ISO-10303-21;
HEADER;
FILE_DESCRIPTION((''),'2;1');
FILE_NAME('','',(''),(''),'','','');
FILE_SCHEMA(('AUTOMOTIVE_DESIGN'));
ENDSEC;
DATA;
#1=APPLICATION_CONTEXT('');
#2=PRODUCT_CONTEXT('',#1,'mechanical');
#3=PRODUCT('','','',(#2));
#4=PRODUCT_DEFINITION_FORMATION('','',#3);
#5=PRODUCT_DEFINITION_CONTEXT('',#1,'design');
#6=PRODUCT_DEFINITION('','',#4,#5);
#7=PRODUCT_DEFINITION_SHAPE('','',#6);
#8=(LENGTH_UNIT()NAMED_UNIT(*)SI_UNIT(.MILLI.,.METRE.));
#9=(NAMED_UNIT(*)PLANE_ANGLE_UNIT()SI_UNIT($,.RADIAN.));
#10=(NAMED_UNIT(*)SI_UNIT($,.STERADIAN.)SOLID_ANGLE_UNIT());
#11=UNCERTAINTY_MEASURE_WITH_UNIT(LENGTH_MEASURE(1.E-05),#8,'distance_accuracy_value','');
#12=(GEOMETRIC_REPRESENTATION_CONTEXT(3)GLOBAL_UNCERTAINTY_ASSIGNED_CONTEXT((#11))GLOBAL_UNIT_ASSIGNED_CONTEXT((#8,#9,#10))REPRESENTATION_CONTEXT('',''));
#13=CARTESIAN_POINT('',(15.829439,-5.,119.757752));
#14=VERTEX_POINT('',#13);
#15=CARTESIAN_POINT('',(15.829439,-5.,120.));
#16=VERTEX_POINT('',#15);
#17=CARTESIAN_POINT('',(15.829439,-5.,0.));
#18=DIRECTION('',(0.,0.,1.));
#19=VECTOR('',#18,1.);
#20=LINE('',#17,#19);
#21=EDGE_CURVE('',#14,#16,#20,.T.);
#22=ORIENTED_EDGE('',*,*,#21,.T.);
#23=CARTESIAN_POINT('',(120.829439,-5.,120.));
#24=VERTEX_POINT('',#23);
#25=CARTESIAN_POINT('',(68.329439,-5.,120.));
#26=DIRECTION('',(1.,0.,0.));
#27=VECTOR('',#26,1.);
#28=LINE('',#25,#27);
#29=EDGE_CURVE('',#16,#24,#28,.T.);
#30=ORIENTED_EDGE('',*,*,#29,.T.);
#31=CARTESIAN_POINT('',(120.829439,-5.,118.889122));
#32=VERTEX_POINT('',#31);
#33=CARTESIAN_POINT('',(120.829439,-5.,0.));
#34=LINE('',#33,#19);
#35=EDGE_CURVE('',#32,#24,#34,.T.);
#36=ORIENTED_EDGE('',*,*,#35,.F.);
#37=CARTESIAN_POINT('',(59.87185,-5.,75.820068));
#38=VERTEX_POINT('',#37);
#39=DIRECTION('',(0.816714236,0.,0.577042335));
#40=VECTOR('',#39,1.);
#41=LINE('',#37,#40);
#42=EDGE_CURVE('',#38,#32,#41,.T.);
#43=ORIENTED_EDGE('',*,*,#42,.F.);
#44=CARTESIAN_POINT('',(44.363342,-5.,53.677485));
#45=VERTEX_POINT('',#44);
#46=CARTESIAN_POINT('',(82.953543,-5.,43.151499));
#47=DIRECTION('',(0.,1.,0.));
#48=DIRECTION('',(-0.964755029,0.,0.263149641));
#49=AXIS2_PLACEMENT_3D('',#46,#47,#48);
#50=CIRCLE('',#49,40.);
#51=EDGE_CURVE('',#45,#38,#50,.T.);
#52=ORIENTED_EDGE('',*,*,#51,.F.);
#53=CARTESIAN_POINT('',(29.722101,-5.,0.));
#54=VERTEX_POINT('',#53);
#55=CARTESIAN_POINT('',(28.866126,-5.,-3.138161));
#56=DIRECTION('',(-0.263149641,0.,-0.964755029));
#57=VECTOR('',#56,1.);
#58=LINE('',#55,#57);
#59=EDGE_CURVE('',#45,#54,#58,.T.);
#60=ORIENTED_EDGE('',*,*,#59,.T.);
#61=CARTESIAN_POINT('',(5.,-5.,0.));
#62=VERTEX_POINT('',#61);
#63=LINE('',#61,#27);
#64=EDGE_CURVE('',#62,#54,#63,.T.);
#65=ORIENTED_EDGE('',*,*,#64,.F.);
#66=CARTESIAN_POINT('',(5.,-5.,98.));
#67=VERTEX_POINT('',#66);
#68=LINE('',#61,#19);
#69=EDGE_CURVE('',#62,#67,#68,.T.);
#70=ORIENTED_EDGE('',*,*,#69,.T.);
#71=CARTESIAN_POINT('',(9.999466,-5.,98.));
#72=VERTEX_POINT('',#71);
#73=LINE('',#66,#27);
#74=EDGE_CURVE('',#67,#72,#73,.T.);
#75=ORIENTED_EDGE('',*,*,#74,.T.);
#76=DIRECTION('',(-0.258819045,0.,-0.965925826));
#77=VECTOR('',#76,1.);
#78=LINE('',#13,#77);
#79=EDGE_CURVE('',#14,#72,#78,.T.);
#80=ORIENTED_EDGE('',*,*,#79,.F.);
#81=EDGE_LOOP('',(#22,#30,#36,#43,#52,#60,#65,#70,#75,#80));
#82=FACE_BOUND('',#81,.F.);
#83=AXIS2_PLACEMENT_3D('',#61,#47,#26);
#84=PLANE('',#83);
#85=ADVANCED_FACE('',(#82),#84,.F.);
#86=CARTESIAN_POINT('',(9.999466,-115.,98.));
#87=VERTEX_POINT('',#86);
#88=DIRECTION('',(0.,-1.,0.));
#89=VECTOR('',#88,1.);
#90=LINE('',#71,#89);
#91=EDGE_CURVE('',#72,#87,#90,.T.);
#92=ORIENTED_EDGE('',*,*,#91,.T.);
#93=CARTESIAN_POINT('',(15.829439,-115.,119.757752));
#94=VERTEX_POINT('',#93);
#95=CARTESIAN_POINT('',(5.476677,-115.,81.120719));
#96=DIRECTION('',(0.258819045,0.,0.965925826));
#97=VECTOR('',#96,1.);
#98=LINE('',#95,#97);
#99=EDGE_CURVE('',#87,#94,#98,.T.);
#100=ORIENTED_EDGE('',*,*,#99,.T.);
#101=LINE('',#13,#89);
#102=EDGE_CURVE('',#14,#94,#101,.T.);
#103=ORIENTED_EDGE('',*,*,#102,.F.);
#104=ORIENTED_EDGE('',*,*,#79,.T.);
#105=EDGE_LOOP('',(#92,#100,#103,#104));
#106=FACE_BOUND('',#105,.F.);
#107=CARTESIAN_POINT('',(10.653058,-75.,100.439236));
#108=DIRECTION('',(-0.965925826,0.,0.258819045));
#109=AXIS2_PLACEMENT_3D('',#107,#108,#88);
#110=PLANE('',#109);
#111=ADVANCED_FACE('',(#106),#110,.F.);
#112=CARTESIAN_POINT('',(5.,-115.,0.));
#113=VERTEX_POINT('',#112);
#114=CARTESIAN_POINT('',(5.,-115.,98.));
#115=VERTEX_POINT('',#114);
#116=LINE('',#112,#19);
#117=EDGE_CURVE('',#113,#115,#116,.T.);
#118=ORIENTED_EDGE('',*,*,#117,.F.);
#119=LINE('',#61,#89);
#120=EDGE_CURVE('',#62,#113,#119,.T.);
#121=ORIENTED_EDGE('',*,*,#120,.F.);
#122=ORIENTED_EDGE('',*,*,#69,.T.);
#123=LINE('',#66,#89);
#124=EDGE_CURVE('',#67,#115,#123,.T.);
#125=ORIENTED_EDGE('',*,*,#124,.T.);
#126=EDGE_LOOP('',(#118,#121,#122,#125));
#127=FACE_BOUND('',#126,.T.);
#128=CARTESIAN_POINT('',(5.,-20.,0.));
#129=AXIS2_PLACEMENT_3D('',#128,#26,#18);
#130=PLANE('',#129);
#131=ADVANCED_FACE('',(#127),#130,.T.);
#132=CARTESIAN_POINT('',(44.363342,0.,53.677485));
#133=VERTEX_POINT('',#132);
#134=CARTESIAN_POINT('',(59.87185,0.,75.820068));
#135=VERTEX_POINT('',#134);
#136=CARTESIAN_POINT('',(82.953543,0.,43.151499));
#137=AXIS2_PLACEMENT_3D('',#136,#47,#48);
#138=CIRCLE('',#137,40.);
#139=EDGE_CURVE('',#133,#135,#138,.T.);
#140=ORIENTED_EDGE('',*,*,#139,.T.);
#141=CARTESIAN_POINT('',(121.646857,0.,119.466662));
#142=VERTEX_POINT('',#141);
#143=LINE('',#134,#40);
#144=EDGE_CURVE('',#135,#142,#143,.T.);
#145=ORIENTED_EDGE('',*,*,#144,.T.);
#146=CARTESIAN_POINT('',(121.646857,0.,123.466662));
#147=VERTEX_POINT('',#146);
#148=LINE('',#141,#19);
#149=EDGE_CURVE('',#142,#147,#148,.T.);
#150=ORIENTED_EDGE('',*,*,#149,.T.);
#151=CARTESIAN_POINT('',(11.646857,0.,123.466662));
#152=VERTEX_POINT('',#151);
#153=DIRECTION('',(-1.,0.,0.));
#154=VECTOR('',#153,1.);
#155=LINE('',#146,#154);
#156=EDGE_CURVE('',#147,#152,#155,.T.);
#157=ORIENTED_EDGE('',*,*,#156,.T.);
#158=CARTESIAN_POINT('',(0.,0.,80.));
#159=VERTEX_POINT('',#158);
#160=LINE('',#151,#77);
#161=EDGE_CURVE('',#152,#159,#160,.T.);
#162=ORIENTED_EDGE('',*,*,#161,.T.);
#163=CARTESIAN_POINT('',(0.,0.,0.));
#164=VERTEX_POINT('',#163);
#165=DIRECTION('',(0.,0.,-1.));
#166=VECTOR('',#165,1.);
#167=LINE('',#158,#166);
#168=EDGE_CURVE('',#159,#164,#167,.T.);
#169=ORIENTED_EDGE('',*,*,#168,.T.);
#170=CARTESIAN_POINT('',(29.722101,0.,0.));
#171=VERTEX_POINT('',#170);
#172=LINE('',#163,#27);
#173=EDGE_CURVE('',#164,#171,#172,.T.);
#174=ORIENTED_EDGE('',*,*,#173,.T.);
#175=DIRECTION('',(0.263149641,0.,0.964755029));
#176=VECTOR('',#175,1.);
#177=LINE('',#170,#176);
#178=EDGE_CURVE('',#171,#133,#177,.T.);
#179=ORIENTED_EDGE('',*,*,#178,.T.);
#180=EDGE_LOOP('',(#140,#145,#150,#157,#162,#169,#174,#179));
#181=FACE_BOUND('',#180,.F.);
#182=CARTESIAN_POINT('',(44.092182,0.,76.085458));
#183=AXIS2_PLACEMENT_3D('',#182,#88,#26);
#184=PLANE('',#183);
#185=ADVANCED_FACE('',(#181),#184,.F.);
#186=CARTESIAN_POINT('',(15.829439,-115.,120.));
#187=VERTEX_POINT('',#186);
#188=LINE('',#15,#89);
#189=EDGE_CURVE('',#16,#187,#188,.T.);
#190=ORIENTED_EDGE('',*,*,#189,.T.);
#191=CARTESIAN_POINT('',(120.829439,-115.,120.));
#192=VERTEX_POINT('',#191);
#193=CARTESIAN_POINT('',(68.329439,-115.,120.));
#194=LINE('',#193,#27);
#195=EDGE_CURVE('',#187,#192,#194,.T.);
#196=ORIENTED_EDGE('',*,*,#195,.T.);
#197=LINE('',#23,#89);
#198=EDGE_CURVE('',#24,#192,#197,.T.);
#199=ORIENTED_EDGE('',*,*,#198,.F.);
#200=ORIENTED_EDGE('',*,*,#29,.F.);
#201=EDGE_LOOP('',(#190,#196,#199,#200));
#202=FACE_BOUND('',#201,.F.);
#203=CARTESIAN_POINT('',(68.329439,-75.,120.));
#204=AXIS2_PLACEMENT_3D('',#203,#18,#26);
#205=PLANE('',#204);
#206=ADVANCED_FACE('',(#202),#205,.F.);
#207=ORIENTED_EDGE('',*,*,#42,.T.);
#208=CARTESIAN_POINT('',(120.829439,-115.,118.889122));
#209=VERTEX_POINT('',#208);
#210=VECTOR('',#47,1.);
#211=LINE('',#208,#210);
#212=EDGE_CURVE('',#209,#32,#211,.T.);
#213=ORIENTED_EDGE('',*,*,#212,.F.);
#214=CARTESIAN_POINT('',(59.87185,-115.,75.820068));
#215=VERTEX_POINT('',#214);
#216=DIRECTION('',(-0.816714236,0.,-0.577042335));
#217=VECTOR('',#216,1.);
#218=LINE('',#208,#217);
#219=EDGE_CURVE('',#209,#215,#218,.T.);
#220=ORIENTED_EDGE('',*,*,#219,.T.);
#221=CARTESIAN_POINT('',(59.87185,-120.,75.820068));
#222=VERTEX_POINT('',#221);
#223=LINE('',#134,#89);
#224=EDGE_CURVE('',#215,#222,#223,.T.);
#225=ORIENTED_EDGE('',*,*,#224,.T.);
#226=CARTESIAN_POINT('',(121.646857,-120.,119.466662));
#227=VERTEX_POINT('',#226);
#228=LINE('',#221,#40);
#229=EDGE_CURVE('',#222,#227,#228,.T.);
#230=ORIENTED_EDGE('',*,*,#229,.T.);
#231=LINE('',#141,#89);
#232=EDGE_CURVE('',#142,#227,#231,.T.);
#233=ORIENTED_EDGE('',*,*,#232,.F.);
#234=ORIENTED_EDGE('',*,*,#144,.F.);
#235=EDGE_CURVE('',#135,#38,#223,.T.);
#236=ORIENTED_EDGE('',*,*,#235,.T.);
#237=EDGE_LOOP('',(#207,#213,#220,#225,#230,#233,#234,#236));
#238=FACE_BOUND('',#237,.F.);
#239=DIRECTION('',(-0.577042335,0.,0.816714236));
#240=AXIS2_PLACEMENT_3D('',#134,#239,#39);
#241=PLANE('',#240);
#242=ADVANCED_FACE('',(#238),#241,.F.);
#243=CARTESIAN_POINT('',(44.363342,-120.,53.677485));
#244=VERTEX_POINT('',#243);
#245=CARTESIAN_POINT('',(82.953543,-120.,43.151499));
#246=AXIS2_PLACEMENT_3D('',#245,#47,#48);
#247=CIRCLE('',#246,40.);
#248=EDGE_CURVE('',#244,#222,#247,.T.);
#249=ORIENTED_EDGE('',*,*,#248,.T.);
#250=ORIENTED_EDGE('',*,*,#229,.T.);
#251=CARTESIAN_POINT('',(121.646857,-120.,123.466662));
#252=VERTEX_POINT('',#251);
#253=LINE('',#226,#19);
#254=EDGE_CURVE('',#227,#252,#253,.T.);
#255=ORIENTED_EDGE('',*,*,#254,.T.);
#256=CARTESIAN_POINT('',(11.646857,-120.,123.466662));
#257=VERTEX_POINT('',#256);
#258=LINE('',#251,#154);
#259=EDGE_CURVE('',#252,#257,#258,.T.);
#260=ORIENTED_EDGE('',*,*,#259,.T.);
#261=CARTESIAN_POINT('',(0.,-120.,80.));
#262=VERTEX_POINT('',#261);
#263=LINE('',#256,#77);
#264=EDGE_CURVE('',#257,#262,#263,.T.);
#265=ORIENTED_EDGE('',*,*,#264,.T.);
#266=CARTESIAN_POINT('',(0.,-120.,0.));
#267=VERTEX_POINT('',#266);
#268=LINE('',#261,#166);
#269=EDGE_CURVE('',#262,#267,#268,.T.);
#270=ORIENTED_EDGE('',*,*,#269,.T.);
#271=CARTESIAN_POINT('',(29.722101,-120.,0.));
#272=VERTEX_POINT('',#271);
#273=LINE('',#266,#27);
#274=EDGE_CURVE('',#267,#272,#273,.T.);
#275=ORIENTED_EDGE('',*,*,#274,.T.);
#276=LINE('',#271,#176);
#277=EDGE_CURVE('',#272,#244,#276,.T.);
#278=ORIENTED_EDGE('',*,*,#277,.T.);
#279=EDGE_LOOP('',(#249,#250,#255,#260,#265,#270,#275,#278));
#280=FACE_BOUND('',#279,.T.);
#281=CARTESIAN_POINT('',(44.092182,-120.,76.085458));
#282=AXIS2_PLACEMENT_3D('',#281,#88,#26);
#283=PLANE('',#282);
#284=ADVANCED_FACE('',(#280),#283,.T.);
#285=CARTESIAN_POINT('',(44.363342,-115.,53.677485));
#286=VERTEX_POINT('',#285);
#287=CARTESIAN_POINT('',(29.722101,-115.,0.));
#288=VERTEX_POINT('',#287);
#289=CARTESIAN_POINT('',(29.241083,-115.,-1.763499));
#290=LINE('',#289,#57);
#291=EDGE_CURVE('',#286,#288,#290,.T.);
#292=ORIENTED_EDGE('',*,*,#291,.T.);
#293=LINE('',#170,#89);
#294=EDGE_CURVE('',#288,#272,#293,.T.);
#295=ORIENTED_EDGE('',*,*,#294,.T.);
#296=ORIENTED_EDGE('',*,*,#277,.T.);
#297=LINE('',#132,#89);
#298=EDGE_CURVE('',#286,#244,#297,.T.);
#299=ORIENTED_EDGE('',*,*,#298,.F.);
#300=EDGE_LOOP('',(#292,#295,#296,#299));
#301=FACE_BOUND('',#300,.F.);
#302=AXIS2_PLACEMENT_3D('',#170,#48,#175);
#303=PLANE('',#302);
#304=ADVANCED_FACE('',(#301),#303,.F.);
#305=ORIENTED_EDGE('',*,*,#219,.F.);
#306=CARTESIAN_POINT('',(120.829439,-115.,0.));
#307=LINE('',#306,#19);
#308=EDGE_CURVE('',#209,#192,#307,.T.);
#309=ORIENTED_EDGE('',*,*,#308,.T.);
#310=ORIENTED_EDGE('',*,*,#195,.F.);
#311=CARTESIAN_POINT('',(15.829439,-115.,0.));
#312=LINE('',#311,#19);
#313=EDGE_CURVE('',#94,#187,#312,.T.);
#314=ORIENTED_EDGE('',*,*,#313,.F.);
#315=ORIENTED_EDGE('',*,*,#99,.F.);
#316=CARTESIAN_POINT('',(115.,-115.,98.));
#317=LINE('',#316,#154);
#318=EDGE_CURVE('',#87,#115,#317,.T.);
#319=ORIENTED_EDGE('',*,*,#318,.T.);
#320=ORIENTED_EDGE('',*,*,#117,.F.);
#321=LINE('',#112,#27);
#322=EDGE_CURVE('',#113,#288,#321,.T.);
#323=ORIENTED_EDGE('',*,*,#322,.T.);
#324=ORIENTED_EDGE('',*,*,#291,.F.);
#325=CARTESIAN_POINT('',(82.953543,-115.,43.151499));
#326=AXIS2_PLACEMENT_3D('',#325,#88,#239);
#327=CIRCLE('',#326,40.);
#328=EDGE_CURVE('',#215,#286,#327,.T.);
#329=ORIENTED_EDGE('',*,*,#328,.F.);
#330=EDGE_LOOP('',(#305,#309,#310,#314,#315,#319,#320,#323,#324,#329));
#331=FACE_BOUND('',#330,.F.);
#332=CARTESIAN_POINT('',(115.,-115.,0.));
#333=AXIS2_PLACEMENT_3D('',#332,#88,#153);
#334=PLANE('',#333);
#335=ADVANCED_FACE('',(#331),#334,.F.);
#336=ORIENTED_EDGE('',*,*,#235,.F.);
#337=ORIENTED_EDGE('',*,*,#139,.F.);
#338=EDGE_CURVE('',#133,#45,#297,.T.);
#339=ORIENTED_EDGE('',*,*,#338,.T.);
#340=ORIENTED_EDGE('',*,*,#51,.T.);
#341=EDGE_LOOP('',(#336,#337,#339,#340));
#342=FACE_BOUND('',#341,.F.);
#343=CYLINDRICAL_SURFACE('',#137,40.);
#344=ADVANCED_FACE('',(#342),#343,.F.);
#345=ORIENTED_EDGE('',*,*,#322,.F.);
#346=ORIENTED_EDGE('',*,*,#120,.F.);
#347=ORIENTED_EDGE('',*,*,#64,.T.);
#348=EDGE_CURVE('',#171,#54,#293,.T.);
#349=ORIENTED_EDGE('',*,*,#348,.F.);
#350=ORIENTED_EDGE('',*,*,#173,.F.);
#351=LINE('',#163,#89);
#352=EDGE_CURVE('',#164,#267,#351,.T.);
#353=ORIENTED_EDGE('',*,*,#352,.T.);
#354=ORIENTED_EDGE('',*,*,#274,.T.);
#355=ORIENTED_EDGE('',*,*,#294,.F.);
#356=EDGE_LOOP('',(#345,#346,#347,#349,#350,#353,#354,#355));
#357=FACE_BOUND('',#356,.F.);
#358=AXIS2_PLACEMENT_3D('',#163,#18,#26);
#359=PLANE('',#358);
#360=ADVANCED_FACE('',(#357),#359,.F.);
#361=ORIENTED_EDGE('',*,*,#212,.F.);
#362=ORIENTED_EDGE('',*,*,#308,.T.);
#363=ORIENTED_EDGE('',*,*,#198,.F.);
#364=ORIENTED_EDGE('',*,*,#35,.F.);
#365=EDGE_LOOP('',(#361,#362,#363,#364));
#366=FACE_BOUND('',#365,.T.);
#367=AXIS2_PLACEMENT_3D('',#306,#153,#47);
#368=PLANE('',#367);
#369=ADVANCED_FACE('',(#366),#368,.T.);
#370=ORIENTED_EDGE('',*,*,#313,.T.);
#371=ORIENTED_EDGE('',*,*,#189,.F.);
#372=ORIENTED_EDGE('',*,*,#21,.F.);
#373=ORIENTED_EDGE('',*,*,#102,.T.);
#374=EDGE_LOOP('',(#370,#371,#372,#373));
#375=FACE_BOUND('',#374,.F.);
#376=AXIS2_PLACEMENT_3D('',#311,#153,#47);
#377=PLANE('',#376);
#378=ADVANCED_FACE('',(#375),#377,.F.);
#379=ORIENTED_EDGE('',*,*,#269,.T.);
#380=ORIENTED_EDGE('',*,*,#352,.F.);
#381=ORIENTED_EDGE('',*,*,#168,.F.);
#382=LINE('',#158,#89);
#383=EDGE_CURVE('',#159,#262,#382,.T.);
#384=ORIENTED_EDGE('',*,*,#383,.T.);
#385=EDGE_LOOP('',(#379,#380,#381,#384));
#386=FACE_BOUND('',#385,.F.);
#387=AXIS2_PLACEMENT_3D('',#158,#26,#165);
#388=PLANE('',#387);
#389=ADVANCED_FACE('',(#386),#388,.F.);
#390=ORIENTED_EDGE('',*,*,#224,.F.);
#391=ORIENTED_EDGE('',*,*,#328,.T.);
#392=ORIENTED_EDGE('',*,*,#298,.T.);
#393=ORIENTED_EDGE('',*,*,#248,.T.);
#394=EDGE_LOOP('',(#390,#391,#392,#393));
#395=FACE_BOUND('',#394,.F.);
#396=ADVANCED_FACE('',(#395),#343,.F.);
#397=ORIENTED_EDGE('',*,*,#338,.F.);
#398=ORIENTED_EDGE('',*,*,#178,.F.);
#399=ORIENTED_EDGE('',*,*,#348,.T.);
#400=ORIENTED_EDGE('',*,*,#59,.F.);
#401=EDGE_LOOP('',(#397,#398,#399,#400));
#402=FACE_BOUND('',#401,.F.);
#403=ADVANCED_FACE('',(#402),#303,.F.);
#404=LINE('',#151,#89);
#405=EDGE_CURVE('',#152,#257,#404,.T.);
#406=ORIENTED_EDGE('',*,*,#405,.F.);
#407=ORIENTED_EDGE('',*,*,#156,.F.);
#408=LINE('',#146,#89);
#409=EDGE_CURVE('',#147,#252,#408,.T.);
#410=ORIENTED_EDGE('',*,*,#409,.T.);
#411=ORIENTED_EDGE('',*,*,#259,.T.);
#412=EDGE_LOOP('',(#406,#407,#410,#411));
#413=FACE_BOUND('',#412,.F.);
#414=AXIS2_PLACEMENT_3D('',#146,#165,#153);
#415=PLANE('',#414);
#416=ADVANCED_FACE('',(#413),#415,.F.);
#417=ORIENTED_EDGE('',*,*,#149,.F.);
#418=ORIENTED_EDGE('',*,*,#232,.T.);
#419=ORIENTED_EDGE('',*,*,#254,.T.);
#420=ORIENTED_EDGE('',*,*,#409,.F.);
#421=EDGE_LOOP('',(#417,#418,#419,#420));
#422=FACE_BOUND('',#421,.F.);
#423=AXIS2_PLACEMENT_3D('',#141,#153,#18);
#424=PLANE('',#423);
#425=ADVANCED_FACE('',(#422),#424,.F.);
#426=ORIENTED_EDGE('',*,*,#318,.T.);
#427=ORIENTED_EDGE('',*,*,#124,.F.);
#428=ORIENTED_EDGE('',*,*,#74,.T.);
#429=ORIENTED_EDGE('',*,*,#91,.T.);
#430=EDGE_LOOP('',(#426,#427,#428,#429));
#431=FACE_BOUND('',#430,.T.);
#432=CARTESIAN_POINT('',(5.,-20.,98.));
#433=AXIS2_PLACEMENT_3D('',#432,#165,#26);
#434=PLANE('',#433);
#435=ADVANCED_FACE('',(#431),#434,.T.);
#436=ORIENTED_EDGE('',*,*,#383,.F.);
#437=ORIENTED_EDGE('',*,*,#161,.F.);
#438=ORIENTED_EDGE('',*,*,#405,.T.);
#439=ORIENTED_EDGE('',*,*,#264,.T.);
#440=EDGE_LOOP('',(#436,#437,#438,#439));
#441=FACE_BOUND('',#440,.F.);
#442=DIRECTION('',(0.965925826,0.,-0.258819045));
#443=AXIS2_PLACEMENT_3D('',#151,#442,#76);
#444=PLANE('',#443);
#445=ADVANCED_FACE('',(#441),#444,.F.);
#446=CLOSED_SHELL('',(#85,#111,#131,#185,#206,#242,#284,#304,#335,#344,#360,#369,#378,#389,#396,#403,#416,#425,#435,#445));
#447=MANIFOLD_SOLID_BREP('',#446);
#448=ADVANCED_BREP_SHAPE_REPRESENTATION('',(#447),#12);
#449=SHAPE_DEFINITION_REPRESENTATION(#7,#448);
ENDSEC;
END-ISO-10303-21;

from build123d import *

# Parameters (mm, degrees)
F1_DEPTH  = 120
F2_W      = 85.2778990954
F2_H      = 80
F3_DEPTH  = 98
F6_DEPTH  = 80
F7_W      = 105
F7_H      = 80
F8_DEPTH  = 120
F9_DEPTH  = 15
F10_DEPTH = 30
F11_DEPTH = 15


with BuildPart() as f1:
    # F0 (on Front) → F1 (new body)
    with BuildSketch(Plane.XZ):
        with BuildLine():
            Line((0, 80), (0, 0))
            Line((0, 0), (29.7221009046, 0))
            Line((29.7221009046, 0), (44.3633417849, 53.6774845415))
            ThreePointArc((44.3633417849, 53.6774845415), (50.1903143406, 66.0986305535), (59.871849565, 75.8200683645))
            Line((59.871849565, 75.8200683645), (121.6468570296, 119.466662183))
            Line((121.6468570296, 119.466662183), (121.6468570296, 123.466662183))
            Line((121.6468570296, 123.466662183), (11.6468570296, 123.466662183))
            Line((11.6468570296, 123.466662183), (0, 80))
        make_face()
    extrude(amount=F1_DEPTH)

    # F2 (on face) → F3 (cut)
    with BuildSketch(Plane(origin=(0, 0, 0), x_dir=(1, 0, 0), z_dir=(0, 0, -1))):
        with Locations((72.3610504523, 60)):
            Rectangle(F2_W, F2_H)
        Polygon((5, 100), (5, 60), (5, 20), (29.7221009046, 20), (29.7221009046, 100), align=None)
    extrude(amount=-F3_DEPTH, mode=Mode.SUBTRACT)

    # F5 (on offset) → F6 (cut)
    with BuildSketch(Plane(origin=(-15.1703708686, 0, 4.0648886231), x_dir=(0, -1, 0), z_dir=(-0.9659258263, 0, 0.2588190451))):
        Polygon((115, 79.7740661031), (115, 99.7740661031), (115, 119.7740661031), (35, 119.7740661031), (35, 79.7740661031), align=None)
    extrude(amount=-F6_DEPTH, mode=Mode.SUBTRACT)

    # F7 (on Top) → F8 (cut)
    with BuildSketch(Plane.XY):
        with Locations((68.3294385483, -75)):
            Rectangle(F7_W, F7_H)
    extrude(amount=F8_DEPTH, mode=Mode.SUBTRACT)

    # F9 (cut): a face of the model
    f9_faces = [f1.faces().sort_by_distance(p)[0] for p in [
        (29.9652985241, -20, 58.8911596381),
    ]]
    extrude(f9_faces, amount=-F9_DEPTH, mode=Mode.SUBTRACT)

    # F10 (cut): a face of the model
    f10_faces = [f1.faces().sort_by_distance(p)[0] for p in [
        (60.278784087, -35, 109.488672273),
    ]]
    extrude(f10_faces, amount=-F10_DEPTH, mode=Mode.SUBTRACT)

    # F11 (cut): a face of the model
    f11_faces = [f1.faces().sort_by_distance(p)[0] for p in [
        (10.1941550896, -100, 42.5407610302),
    ]]
    extrude(f11_faces, amount=-F11_DEPTH, mode=Mode.SUBTRACT)


solid = f1.part
